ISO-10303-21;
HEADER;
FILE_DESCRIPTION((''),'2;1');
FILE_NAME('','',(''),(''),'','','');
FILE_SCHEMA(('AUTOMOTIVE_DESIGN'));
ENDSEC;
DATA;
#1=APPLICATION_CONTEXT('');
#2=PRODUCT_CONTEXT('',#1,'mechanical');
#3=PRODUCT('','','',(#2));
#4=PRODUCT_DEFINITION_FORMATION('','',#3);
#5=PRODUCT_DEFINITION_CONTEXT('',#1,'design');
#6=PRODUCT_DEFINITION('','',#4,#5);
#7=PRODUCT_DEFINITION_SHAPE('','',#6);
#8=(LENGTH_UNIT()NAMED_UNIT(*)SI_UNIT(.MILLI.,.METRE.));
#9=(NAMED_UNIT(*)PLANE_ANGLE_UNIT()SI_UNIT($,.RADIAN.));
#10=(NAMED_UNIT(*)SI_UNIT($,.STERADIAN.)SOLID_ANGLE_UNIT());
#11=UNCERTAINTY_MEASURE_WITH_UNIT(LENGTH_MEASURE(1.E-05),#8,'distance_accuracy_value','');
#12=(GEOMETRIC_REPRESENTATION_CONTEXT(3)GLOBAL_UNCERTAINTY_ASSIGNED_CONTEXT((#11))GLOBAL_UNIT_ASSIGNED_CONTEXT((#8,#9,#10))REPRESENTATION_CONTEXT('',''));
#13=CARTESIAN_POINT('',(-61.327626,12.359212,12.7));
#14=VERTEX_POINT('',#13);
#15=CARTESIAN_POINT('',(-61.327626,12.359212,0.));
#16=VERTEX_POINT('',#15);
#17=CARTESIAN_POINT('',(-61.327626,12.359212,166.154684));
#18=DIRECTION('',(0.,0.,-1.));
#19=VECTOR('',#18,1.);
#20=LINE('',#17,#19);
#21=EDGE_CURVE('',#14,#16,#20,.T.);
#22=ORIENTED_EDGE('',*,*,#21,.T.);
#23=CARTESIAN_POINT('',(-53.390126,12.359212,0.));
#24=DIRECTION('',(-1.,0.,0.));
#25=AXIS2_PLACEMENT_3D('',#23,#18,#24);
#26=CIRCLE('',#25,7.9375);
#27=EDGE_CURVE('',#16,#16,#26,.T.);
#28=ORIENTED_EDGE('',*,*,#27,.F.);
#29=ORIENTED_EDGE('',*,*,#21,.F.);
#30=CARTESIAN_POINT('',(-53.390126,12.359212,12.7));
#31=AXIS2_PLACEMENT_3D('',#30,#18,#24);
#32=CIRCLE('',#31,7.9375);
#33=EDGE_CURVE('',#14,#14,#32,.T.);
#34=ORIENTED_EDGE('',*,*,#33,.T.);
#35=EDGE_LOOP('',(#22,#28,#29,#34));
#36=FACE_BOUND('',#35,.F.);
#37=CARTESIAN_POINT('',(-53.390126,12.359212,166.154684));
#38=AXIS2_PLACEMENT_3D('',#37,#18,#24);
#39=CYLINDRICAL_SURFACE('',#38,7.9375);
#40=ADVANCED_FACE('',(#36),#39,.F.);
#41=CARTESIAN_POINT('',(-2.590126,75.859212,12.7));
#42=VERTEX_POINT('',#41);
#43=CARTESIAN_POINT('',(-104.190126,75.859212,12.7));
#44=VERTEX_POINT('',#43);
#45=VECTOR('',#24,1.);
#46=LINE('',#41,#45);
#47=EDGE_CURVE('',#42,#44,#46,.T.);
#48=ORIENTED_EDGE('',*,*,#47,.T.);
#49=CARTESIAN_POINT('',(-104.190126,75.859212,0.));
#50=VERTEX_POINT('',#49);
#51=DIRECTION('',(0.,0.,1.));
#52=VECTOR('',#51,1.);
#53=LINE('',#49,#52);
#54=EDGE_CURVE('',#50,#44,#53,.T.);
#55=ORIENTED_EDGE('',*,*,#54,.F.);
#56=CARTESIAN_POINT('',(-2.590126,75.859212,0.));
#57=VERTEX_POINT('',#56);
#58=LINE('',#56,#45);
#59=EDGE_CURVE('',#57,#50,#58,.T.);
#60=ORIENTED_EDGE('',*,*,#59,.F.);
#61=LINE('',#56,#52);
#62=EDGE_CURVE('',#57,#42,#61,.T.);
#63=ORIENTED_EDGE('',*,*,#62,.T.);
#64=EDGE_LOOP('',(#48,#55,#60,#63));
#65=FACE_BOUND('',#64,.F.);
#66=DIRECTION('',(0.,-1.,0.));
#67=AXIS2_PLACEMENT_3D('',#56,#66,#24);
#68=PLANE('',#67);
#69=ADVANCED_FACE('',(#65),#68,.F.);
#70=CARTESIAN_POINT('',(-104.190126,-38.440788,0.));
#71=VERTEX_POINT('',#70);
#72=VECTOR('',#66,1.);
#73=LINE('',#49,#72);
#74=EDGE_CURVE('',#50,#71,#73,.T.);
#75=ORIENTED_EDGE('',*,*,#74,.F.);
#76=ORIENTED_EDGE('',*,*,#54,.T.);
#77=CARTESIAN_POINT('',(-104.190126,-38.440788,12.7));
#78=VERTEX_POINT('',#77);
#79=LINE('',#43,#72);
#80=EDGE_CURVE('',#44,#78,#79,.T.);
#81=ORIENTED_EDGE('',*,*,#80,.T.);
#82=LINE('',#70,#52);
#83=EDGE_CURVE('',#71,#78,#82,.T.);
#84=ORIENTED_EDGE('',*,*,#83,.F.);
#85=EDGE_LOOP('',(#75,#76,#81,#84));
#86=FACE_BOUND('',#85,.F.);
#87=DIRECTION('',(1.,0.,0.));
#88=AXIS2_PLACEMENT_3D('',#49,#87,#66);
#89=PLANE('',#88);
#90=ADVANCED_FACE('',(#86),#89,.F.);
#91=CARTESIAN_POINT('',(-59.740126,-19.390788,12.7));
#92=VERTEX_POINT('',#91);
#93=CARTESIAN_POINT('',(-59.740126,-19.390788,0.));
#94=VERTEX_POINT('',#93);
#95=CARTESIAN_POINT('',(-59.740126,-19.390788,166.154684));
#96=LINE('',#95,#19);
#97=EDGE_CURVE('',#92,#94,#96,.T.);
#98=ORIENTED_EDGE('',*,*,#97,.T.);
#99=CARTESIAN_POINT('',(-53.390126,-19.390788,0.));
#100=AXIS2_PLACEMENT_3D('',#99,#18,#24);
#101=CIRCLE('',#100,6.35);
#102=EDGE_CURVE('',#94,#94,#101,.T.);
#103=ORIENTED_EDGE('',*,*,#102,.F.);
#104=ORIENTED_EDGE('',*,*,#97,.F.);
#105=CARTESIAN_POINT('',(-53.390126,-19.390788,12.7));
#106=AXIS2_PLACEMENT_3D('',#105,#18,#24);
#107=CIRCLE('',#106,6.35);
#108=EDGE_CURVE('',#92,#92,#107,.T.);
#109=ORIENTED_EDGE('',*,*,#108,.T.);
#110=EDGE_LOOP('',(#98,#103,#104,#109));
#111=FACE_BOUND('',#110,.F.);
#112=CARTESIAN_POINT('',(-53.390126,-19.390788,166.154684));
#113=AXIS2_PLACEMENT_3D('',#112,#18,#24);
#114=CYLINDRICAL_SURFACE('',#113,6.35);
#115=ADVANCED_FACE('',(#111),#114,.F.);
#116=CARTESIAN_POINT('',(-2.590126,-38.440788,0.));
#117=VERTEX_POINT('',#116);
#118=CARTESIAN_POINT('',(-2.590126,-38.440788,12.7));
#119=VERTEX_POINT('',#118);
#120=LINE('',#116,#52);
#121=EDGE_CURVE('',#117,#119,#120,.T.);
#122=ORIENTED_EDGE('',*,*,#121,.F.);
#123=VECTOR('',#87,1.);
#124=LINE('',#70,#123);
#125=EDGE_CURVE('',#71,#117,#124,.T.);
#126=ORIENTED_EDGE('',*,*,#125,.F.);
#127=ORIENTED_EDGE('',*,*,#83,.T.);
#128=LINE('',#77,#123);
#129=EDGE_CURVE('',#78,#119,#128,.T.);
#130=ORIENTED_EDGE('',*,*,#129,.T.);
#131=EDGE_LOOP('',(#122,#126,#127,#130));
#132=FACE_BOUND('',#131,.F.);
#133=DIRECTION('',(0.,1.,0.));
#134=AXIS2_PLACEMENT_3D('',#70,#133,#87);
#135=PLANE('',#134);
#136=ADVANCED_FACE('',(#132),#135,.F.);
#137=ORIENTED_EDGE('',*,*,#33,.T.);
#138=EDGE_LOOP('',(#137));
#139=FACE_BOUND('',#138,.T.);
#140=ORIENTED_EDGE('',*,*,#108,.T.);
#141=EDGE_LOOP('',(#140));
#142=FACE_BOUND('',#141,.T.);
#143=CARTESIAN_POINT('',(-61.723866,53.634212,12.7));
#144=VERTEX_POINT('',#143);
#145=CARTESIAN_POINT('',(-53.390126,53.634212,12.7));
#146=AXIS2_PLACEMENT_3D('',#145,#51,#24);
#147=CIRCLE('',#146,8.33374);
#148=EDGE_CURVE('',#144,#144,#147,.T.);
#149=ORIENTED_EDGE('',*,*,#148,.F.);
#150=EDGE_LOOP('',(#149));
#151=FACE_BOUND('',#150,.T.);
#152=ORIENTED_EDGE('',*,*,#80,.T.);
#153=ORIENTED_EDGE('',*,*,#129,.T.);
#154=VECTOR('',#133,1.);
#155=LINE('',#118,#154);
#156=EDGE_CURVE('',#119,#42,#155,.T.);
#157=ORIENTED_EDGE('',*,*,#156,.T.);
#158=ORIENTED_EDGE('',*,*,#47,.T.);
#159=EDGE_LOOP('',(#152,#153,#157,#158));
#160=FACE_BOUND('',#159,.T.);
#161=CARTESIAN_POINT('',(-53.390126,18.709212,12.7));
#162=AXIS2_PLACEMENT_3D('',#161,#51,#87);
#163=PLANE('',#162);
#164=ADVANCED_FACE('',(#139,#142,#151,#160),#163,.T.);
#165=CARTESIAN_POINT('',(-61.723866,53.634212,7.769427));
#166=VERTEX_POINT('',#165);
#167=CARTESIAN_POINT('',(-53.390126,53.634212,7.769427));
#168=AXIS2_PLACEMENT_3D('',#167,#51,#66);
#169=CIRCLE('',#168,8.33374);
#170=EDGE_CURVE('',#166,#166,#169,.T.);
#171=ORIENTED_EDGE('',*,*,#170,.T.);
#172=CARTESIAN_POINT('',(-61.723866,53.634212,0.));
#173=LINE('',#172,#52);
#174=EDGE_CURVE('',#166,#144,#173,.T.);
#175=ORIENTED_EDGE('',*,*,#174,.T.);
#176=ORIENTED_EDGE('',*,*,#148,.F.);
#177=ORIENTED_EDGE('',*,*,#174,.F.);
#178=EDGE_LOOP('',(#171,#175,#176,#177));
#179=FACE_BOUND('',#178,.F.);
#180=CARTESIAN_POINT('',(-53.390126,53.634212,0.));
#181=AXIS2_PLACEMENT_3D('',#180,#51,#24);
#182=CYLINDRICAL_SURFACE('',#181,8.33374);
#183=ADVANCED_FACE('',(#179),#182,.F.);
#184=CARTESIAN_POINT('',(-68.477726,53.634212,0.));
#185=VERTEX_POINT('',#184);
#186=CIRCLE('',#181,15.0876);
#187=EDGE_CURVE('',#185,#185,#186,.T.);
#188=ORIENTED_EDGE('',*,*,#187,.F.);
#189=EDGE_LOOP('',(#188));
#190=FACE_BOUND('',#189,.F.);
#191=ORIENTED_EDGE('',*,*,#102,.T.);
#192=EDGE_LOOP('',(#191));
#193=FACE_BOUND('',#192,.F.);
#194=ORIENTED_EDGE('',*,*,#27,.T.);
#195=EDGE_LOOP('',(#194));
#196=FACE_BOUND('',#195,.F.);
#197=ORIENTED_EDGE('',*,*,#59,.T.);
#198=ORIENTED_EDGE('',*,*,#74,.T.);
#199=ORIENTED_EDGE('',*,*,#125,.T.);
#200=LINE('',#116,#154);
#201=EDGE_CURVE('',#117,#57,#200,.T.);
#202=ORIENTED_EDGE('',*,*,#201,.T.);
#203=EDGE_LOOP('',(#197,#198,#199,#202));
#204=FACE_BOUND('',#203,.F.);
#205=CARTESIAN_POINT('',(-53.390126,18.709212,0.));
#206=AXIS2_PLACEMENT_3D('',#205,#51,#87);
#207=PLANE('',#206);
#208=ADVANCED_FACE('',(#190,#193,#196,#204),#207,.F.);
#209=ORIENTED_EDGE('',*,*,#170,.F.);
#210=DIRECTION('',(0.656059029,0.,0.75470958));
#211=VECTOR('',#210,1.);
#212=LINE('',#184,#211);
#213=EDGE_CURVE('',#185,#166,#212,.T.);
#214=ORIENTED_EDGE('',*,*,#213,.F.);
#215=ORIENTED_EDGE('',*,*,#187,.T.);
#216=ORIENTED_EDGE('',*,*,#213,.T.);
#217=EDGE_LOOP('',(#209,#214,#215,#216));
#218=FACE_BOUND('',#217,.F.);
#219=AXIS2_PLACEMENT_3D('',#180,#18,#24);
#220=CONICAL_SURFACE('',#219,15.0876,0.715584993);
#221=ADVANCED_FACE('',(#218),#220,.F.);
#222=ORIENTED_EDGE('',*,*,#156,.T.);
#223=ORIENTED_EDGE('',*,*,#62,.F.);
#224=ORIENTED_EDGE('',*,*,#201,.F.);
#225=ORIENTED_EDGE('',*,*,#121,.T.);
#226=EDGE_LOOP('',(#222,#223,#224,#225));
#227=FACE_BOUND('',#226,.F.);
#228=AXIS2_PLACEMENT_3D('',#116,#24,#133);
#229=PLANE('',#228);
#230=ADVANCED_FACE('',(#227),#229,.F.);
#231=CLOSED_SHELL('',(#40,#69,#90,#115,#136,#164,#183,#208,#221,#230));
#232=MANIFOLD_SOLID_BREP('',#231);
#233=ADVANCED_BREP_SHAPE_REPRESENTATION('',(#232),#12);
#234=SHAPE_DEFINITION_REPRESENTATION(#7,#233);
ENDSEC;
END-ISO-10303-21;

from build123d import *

# Parameters (mm, degrees)
F0_R           = 1.27
F1_DEPTH       = 12.7
F3_D           = 15.875
F5_D           = 16.66748
F5_CSINK_D     = 30.1752
F5_CSINK_ANGLE = 82
F7_D           = 12.7


# Not quite as in the source:
# - a feature names something its author has since deleted; it is built from what else it names


with BuildPart() as f1:
    # F0 (on Top) → F1 (new body)
    with BuildSketch(Plane.XY):
        Polygon((-2.5901260614, -38.4407882191), (-2.5901260614, 12.3592117809), (-2.5901260614, 63.1592117809), (-2.5901260614, 75.8592117809), (-104.1901260614, 75.8592117809), (-104.1901260614, 63.1592117809), (-104.1901260614, -38.4407882191), align=None)
        with Locations((-85.1401260614, 12.3592117809)):
            Circle(F0_R, mode=Mode.SUBTRACT)
        with Locations((-78.4163327398, -7.1792497576)):
            Circle(F0_R, mode=Mode.SUBTRACT)
        with Locations((-53.3901260614, -19.3907882191)):
            Circle(F0_R, mode=Mode.SUBTRACT)
        with Locations((-53.3901260614, 12.3592117809)):
            Circle(F0_R, mode=Mode.SUBTRACT)
        with Locations((-23.1804483045, 2.5899810116)):
            Circle(F0_R, mode=Mode.SUBTRACT)
        with BuildLine():
            ThreePointArc((-13.3851260614, 12.3592117809), (-12.1151260614, 13.6292117809), (-10.8451260614, 12.3592117809))
            ThreePointArc((-10.8451260614, 12.3592117809), (-12.1151260614, 11.0892117809), (-13.3851260614, 12.3592117809))
        make_face(mode=Mode.SUBTRACT)
        with Locations((-92.6627071454, 25.0592117809)):
            Circle(F0_R, mode=Mode.SUBTRACT)
        with Locations((-20.8560573795, 37.7592117809)):
            Circle(F0_R, mode=Mode.SUBTRACT)
        with Locations((-53.3901260614, 53.6342117809)):
            Circle(F0_R, mode=Mode.SUBTRACT)
        with Locations((-92.6627071454, 25.0592117809)):
            Circle(F0_R)
        with Locations((-85.1401260614, 12.3592117809)):
            Circle(F0_R)
        with Locations((-78.4163327398, -7.1792497576)):
            Circle(F0_R)
        with Locations((-23.1804483045, 2.5899810116)):
            Circle(F0_R)
        with Locations((-20.8560573795, 37.7592117809)):
            Circle(F0_R)
        with BuildLine():
            ThreePointArc((-13.3851260614, 12.3592117809), (-12.1151260614, 11.0892117809), (-10.8451260614, 12.3592117809))
            Line((-10.8451260614, 12.3592117809), (-13.3851260614, 12.3592117809))
        make_face()
        with BuildLine():
            Line((-13.3851260614, 12.3592117809), (-10.8451260614, 12.3592117809))
            ThreePointArc((-10.8451260614, 12.3592117809), (-12.1151260614, 13.6292117809), (-13.3851260614, 12.3592117809))
        make_face()
    extrude(amount=F1_DEPTH)

    # F3 (through all)
    with Locations(Plane.XY.offset(12.7)):
        with Locations((-53.3901260614, 12.3592117809)):
            Hole(F3_D / 2)

    # F5 (through all)
    with Locations(Plane(origin=(0, 0, 0), x_dir=(1, 0, 0), z_dir=(0, 0, -1))):
        with Locations((-53.3901260614, -53.6342117809)):
            CounterSinkHole(F5_D / 2, F5_CSINK_D / 2, counter_sink_angle=F5_CSINK_ANGLE)

    # F7 (through all)
    with Locations(Plane.XY.offset(12.7)):
        with Locations((-53.3901260614, -19.3907882191)):
            Hole(F7_D / 2)


solid = f1.part
